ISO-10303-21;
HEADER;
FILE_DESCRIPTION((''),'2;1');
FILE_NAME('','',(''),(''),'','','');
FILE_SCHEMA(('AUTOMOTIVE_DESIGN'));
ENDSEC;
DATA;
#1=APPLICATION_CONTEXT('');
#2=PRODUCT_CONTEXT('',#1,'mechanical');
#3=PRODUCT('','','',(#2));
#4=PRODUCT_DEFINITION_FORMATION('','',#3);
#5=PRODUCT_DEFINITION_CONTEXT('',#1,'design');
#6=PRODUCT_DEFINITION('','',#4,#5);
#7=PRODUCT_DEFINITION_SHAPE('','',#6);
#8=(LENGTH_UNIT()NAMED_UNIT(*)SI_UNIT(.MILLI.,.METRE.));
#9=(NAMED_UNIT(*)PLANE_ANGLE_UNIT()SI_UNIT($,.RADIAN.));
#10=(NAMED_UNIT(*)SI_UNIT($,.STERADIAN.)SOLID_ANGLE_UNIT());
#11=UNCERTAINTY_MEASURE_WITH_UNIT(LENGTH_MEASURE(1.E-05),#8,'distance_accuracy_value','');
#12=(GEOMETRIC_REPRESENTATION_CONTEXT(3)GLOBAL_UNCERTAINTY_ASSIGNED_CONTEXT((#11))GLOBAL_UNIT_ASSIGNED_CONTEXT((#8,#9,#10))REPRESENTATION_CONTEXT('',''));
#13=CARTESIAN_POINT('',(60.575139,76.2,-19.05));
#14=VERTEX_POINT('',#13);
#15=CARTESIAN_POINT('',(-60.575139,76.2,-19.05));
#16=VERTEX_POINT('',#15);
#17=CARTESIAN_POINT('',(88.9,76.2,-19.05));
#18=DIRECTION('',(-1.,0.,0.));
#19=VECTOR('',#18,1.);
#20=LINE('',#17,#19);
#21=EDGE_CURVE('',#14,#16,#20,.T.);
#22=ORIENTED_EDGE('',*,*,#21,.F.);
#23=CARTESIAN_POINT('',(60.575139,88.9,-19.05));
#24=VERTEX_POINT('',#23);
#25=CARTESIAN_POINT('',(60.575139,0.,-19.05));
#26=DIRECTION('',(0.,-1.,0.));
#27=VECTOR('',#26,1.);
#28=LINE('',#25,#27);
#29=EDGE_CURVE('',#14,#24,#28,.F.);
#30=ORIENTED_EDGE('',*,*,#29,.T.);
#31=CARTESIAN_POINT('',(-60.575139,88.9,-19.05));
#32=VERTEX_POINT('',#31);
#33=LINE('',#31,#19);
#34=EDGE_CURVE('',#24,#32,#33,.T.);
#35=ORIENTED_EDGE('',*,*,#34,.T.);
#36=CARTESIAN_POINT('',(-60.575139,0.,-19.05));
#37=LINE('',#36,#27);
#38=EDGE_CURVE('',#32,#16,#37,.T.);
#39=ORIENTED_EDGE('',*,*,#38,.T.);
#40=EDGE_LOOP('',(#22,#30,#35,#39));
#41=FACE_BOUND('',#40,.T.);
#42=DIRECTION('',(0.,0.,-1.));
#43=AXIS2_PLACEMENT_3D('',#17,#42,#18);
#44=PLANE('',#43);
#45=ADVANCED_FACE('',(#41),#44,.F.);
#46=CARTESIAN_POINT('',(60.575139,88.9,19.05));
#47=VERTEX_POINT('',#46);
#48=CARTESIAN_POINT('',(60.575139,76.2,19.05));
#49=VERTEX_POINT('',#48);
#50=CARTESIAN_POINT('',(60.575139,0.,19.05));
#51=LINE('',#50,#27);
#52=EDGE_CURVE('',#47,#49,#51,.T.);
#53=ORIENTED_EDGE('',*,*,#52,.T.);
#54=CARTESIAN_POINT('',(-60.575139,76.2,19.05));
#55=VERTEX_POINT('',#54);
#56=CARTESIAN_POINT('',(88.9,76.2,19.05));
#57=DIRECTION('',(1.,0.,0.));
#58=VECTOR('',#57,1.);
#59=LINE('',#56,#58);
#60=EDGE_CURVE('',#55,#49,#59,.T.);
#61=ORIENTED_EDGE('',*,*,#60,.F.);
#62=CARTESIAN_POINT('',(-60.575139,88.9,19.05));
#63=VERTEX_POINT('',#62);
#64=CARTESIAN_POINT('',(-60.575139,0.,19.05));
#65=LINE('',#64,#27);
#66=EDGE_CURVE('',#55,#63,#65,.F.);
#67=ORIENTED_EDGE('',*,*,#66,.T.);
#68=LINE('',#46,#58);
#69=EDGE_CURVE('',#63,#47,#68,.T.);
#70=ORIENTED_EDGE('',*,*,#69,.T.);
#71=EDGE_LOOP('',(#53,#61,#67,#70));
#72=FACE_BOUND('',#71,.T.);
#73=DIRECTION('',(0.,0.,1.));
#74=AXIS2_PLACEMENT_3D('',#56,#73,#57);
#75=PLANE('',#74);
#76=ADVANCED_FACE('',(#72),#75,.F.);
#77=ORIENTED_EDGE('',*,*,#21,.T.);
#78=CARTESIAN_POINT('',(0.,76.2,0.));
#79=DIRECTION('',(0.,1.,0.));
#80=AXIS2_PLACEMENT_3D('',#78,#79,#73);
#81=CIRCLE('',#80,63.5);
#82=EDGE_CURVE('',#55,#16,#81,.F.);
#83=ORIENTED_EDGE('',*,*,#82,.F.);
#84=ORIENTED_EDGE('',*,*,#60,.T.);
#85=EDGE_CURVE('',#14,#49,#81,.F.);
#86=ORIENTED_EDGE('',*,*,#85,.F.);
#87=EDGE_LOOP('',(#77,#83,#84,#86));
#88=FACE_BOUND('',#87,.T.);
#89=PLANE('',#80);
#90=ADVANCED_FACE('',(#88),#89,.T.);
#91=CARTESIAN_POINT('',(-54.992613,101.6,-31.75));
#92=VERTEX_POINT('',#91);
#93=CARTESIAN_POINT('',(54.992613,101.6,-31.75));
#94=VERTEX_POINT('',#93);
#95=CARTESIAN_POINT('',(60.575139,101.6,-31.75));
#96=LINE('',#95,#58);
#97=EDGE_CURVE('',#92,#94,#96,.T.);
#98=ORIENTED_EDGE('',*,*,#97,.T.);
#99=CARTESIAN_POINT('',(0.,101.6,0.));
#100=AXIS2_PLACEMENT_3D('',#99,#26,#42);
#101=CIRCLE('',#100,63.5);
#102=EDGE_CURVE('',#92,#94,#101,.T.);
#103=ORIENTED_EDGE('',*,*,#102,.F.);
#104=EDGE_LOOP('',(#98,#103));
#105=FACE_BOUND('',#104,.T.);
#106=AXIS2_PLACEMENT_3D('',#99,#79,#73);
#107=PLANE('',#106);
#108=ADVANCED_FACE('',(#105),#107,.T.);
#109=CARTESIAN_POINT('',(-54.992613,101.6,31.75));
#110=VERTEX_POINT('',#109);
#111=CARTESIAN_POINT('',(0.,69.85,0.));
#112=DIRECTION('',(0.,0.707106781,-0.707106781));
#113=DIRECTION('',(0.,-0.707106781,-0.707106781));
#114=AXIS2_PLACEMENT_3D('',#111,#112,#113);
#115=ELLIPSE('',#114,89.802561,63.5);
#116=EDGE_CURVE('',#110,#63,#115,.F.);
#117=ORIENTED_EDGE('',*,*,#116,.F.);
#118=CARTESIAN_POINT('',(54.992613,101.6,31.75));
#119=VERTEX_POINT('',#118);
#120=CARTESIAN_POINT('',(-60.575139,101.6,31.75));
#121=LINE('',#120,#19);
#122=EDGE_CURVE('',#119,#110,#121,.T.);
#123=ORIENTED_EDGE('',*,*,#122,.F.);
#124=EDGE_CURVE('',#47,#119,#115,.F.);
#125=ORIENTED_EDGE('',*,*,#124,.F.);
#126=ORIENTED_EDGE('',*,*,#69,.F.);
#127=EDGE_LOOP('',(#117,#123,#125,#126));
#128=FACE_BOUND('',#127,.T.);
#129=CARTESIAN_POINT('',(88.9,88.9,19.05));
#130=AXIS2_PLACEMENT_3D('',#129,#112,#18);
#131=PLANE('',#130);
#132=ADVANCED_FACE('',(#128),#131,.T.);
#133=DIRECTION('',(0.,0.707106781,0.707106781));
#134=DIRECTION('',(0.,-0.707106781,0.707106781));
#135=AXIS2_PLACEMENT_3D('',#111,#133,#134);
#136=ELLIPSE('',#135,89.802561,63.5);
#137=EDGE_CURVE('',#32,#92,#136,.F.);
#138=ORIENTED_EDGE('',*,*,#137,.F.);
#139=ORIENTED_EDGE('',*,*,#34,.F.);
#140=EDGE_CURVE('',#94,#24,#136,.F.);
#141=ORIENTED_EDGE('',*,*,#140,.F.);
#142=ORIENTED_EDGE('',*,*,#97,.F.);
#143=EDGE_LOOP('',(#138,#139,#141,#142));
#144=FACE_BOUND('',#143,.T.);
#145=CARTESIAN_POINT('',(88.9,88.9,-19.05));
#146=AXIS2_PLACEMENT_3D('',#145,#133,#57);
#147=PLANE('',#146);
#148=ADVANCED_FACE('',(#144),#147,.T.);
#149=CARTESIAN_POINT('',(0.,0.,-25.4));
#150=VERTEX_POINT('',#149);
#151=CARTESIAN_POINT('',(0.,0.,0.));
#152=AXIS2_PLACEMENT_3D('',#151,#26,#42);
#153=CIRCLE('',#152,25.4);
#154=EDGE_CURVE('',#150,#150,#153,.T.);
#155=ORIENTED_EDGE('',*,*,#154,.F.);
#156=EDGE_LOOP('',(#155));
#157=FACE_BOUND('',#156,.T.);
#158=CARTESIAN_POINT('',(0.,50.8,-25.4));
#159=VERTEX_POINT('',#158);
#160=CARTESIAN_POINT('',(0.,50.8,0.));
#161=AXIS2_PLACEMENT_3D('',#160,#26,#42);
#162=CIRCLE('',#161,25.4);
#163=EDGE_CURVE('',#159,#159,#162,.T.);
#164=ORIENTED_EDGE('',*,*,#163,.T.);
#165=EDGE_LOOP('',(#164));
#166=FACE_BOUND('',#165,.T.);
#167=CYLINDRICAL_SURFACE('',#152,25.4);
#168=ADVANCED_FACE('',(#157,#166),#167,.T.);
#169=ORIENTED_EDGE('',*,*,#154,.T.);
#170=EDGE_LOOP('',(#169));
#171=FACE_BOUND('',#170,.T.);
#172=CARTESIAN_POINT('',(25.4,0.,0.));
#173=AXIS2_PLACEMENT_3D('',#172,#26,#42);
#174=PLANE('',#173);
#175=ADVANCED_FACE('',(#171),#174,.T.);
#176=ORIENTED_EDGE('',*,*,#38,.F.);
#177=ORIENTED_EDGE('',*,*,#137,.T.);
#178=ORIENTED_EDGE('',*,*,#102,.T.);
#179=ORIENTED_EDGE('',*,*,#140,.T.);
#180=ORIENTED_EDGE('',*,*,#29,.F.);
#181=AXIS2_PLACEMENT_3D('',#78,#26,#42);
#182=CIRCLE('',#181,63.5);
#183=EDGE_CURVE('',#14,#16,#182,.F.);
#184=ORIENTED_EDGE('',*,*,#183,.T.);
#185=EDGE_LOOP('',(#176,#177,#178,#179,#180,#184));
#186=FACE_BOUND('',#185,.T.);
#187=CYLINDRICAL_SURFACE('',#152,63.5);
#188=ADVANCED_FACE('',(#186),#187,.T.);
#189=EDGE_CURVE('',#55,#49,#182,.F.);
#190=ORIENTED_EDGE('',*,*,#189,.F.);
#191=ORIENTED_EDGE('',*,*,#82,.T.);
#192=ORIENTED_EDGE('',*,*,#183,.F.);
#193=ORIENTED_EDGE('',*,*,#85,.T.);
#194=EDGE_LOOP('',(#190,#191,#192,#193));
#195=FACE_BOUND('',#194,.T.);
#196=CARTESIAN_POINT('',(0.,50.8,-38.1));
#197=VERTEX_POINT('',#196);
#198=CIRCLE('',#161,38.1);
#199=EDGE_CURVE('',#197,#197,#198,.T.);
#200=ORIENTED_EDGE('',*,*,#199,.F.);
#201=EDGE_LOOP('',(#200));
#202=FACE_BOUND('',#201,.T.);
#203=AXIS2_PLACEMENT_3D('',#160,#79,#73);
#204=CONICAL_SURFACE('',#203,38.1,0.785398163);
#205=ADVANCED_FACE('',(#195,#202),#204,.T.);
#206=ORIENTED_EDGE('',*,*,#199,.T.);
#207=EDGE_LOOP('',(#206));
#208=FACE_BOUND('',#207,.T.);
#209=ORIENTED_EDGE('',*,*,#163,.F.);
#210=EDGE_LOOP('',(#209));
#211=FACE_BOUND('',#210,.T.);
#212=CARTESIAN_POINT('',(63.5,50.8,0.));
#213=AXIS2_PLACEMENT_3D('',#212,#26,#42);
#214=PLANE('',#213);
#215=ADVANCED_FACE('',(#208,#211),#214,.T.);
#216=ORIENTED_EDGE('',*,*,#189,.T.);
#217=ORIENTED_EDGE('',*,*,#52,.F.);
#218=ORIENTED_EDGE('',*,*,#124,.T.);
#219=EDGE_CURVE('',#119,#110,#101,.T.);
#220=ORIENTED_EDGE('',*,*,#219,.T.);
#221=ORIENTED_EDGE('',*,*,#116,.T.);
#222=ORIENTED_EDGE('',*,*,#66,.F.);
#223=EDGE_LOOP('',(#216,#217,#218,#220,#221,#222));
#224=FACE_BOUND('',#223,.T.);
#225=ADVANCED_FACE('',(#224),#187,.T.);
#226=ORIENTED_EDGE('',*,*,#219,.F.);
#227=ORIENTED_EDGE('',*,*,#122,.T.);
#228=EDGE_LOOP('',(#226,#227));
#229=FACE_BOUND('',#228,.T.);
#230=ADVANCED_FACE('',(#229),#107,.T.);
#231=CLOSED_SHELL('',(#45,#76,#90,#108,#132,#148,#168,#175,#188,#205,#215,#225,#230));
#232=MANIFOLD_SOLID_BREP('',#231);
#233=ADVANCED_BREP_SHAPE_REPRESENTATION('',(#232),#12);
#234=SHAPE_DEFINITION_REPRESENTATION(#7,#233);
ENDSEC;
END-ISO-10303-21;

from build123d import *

# Parameters (mm, degrees)
SKETCH2_W          = 177.8
SKETCH2_H          = 38.1
CUT_EXTRUDE1_DEPTH = 25.4
CHAMFER1_SIZE      = 12.7
CHAMFER2_SIZE      = 25.4


with BuildPart() as part:
    # Sketch1 → Revolve1 (revolve)
    with BuildSketch(Plane.XY, mode=Mode.PRIVATE) as revolve1_sk:
        Polygon((0, 0), (0, 101.6), (63.5, 101.6), (63.5, 50.8), (25.4, 50.8), (25.4, 0), align=None)
    revolve(revolve1_sk.sketch.rotate(Axis((0, 0, 0), (0, 1, 0)), 90), axis=Axis((0, 0, 0), (0, 1, 0)))

    # Sketch2 → Cut-Extrude1 (cut)
    with BuildSketch(Plane(origin=(0, 101.6, 0), x_dir=(1, 0, 0), z_dir=(0, 1, 0))):
        Rectangle(SKETCH2_W, SKETCH2_H)
    extrude(amount=-CUT_EXTRUDE1_DEPTH, mode=Mode.SUBTRACT)

    # Chamfer1
    chamfer1_edges = [part.edges().sort_by_distance(p)[0] for p in [
        (0, 101.6, 19.05),
        (0, 101.6, -19.05),
    ]]
    chamfer(chamfer1_edges, length=CHAMFER1_SIZE)

    # Chamfer2
    chamfer2_edges = [part.edges().sort_by_distance(p)[0] for p in [
        (0, 50.8, 63.5),
    ]]
    chamfer(chamfer2_edges, length=CHAMFER2_SIZE - 0.0001)  # a hair under: the kernel refuses the full size


solid = part.part
